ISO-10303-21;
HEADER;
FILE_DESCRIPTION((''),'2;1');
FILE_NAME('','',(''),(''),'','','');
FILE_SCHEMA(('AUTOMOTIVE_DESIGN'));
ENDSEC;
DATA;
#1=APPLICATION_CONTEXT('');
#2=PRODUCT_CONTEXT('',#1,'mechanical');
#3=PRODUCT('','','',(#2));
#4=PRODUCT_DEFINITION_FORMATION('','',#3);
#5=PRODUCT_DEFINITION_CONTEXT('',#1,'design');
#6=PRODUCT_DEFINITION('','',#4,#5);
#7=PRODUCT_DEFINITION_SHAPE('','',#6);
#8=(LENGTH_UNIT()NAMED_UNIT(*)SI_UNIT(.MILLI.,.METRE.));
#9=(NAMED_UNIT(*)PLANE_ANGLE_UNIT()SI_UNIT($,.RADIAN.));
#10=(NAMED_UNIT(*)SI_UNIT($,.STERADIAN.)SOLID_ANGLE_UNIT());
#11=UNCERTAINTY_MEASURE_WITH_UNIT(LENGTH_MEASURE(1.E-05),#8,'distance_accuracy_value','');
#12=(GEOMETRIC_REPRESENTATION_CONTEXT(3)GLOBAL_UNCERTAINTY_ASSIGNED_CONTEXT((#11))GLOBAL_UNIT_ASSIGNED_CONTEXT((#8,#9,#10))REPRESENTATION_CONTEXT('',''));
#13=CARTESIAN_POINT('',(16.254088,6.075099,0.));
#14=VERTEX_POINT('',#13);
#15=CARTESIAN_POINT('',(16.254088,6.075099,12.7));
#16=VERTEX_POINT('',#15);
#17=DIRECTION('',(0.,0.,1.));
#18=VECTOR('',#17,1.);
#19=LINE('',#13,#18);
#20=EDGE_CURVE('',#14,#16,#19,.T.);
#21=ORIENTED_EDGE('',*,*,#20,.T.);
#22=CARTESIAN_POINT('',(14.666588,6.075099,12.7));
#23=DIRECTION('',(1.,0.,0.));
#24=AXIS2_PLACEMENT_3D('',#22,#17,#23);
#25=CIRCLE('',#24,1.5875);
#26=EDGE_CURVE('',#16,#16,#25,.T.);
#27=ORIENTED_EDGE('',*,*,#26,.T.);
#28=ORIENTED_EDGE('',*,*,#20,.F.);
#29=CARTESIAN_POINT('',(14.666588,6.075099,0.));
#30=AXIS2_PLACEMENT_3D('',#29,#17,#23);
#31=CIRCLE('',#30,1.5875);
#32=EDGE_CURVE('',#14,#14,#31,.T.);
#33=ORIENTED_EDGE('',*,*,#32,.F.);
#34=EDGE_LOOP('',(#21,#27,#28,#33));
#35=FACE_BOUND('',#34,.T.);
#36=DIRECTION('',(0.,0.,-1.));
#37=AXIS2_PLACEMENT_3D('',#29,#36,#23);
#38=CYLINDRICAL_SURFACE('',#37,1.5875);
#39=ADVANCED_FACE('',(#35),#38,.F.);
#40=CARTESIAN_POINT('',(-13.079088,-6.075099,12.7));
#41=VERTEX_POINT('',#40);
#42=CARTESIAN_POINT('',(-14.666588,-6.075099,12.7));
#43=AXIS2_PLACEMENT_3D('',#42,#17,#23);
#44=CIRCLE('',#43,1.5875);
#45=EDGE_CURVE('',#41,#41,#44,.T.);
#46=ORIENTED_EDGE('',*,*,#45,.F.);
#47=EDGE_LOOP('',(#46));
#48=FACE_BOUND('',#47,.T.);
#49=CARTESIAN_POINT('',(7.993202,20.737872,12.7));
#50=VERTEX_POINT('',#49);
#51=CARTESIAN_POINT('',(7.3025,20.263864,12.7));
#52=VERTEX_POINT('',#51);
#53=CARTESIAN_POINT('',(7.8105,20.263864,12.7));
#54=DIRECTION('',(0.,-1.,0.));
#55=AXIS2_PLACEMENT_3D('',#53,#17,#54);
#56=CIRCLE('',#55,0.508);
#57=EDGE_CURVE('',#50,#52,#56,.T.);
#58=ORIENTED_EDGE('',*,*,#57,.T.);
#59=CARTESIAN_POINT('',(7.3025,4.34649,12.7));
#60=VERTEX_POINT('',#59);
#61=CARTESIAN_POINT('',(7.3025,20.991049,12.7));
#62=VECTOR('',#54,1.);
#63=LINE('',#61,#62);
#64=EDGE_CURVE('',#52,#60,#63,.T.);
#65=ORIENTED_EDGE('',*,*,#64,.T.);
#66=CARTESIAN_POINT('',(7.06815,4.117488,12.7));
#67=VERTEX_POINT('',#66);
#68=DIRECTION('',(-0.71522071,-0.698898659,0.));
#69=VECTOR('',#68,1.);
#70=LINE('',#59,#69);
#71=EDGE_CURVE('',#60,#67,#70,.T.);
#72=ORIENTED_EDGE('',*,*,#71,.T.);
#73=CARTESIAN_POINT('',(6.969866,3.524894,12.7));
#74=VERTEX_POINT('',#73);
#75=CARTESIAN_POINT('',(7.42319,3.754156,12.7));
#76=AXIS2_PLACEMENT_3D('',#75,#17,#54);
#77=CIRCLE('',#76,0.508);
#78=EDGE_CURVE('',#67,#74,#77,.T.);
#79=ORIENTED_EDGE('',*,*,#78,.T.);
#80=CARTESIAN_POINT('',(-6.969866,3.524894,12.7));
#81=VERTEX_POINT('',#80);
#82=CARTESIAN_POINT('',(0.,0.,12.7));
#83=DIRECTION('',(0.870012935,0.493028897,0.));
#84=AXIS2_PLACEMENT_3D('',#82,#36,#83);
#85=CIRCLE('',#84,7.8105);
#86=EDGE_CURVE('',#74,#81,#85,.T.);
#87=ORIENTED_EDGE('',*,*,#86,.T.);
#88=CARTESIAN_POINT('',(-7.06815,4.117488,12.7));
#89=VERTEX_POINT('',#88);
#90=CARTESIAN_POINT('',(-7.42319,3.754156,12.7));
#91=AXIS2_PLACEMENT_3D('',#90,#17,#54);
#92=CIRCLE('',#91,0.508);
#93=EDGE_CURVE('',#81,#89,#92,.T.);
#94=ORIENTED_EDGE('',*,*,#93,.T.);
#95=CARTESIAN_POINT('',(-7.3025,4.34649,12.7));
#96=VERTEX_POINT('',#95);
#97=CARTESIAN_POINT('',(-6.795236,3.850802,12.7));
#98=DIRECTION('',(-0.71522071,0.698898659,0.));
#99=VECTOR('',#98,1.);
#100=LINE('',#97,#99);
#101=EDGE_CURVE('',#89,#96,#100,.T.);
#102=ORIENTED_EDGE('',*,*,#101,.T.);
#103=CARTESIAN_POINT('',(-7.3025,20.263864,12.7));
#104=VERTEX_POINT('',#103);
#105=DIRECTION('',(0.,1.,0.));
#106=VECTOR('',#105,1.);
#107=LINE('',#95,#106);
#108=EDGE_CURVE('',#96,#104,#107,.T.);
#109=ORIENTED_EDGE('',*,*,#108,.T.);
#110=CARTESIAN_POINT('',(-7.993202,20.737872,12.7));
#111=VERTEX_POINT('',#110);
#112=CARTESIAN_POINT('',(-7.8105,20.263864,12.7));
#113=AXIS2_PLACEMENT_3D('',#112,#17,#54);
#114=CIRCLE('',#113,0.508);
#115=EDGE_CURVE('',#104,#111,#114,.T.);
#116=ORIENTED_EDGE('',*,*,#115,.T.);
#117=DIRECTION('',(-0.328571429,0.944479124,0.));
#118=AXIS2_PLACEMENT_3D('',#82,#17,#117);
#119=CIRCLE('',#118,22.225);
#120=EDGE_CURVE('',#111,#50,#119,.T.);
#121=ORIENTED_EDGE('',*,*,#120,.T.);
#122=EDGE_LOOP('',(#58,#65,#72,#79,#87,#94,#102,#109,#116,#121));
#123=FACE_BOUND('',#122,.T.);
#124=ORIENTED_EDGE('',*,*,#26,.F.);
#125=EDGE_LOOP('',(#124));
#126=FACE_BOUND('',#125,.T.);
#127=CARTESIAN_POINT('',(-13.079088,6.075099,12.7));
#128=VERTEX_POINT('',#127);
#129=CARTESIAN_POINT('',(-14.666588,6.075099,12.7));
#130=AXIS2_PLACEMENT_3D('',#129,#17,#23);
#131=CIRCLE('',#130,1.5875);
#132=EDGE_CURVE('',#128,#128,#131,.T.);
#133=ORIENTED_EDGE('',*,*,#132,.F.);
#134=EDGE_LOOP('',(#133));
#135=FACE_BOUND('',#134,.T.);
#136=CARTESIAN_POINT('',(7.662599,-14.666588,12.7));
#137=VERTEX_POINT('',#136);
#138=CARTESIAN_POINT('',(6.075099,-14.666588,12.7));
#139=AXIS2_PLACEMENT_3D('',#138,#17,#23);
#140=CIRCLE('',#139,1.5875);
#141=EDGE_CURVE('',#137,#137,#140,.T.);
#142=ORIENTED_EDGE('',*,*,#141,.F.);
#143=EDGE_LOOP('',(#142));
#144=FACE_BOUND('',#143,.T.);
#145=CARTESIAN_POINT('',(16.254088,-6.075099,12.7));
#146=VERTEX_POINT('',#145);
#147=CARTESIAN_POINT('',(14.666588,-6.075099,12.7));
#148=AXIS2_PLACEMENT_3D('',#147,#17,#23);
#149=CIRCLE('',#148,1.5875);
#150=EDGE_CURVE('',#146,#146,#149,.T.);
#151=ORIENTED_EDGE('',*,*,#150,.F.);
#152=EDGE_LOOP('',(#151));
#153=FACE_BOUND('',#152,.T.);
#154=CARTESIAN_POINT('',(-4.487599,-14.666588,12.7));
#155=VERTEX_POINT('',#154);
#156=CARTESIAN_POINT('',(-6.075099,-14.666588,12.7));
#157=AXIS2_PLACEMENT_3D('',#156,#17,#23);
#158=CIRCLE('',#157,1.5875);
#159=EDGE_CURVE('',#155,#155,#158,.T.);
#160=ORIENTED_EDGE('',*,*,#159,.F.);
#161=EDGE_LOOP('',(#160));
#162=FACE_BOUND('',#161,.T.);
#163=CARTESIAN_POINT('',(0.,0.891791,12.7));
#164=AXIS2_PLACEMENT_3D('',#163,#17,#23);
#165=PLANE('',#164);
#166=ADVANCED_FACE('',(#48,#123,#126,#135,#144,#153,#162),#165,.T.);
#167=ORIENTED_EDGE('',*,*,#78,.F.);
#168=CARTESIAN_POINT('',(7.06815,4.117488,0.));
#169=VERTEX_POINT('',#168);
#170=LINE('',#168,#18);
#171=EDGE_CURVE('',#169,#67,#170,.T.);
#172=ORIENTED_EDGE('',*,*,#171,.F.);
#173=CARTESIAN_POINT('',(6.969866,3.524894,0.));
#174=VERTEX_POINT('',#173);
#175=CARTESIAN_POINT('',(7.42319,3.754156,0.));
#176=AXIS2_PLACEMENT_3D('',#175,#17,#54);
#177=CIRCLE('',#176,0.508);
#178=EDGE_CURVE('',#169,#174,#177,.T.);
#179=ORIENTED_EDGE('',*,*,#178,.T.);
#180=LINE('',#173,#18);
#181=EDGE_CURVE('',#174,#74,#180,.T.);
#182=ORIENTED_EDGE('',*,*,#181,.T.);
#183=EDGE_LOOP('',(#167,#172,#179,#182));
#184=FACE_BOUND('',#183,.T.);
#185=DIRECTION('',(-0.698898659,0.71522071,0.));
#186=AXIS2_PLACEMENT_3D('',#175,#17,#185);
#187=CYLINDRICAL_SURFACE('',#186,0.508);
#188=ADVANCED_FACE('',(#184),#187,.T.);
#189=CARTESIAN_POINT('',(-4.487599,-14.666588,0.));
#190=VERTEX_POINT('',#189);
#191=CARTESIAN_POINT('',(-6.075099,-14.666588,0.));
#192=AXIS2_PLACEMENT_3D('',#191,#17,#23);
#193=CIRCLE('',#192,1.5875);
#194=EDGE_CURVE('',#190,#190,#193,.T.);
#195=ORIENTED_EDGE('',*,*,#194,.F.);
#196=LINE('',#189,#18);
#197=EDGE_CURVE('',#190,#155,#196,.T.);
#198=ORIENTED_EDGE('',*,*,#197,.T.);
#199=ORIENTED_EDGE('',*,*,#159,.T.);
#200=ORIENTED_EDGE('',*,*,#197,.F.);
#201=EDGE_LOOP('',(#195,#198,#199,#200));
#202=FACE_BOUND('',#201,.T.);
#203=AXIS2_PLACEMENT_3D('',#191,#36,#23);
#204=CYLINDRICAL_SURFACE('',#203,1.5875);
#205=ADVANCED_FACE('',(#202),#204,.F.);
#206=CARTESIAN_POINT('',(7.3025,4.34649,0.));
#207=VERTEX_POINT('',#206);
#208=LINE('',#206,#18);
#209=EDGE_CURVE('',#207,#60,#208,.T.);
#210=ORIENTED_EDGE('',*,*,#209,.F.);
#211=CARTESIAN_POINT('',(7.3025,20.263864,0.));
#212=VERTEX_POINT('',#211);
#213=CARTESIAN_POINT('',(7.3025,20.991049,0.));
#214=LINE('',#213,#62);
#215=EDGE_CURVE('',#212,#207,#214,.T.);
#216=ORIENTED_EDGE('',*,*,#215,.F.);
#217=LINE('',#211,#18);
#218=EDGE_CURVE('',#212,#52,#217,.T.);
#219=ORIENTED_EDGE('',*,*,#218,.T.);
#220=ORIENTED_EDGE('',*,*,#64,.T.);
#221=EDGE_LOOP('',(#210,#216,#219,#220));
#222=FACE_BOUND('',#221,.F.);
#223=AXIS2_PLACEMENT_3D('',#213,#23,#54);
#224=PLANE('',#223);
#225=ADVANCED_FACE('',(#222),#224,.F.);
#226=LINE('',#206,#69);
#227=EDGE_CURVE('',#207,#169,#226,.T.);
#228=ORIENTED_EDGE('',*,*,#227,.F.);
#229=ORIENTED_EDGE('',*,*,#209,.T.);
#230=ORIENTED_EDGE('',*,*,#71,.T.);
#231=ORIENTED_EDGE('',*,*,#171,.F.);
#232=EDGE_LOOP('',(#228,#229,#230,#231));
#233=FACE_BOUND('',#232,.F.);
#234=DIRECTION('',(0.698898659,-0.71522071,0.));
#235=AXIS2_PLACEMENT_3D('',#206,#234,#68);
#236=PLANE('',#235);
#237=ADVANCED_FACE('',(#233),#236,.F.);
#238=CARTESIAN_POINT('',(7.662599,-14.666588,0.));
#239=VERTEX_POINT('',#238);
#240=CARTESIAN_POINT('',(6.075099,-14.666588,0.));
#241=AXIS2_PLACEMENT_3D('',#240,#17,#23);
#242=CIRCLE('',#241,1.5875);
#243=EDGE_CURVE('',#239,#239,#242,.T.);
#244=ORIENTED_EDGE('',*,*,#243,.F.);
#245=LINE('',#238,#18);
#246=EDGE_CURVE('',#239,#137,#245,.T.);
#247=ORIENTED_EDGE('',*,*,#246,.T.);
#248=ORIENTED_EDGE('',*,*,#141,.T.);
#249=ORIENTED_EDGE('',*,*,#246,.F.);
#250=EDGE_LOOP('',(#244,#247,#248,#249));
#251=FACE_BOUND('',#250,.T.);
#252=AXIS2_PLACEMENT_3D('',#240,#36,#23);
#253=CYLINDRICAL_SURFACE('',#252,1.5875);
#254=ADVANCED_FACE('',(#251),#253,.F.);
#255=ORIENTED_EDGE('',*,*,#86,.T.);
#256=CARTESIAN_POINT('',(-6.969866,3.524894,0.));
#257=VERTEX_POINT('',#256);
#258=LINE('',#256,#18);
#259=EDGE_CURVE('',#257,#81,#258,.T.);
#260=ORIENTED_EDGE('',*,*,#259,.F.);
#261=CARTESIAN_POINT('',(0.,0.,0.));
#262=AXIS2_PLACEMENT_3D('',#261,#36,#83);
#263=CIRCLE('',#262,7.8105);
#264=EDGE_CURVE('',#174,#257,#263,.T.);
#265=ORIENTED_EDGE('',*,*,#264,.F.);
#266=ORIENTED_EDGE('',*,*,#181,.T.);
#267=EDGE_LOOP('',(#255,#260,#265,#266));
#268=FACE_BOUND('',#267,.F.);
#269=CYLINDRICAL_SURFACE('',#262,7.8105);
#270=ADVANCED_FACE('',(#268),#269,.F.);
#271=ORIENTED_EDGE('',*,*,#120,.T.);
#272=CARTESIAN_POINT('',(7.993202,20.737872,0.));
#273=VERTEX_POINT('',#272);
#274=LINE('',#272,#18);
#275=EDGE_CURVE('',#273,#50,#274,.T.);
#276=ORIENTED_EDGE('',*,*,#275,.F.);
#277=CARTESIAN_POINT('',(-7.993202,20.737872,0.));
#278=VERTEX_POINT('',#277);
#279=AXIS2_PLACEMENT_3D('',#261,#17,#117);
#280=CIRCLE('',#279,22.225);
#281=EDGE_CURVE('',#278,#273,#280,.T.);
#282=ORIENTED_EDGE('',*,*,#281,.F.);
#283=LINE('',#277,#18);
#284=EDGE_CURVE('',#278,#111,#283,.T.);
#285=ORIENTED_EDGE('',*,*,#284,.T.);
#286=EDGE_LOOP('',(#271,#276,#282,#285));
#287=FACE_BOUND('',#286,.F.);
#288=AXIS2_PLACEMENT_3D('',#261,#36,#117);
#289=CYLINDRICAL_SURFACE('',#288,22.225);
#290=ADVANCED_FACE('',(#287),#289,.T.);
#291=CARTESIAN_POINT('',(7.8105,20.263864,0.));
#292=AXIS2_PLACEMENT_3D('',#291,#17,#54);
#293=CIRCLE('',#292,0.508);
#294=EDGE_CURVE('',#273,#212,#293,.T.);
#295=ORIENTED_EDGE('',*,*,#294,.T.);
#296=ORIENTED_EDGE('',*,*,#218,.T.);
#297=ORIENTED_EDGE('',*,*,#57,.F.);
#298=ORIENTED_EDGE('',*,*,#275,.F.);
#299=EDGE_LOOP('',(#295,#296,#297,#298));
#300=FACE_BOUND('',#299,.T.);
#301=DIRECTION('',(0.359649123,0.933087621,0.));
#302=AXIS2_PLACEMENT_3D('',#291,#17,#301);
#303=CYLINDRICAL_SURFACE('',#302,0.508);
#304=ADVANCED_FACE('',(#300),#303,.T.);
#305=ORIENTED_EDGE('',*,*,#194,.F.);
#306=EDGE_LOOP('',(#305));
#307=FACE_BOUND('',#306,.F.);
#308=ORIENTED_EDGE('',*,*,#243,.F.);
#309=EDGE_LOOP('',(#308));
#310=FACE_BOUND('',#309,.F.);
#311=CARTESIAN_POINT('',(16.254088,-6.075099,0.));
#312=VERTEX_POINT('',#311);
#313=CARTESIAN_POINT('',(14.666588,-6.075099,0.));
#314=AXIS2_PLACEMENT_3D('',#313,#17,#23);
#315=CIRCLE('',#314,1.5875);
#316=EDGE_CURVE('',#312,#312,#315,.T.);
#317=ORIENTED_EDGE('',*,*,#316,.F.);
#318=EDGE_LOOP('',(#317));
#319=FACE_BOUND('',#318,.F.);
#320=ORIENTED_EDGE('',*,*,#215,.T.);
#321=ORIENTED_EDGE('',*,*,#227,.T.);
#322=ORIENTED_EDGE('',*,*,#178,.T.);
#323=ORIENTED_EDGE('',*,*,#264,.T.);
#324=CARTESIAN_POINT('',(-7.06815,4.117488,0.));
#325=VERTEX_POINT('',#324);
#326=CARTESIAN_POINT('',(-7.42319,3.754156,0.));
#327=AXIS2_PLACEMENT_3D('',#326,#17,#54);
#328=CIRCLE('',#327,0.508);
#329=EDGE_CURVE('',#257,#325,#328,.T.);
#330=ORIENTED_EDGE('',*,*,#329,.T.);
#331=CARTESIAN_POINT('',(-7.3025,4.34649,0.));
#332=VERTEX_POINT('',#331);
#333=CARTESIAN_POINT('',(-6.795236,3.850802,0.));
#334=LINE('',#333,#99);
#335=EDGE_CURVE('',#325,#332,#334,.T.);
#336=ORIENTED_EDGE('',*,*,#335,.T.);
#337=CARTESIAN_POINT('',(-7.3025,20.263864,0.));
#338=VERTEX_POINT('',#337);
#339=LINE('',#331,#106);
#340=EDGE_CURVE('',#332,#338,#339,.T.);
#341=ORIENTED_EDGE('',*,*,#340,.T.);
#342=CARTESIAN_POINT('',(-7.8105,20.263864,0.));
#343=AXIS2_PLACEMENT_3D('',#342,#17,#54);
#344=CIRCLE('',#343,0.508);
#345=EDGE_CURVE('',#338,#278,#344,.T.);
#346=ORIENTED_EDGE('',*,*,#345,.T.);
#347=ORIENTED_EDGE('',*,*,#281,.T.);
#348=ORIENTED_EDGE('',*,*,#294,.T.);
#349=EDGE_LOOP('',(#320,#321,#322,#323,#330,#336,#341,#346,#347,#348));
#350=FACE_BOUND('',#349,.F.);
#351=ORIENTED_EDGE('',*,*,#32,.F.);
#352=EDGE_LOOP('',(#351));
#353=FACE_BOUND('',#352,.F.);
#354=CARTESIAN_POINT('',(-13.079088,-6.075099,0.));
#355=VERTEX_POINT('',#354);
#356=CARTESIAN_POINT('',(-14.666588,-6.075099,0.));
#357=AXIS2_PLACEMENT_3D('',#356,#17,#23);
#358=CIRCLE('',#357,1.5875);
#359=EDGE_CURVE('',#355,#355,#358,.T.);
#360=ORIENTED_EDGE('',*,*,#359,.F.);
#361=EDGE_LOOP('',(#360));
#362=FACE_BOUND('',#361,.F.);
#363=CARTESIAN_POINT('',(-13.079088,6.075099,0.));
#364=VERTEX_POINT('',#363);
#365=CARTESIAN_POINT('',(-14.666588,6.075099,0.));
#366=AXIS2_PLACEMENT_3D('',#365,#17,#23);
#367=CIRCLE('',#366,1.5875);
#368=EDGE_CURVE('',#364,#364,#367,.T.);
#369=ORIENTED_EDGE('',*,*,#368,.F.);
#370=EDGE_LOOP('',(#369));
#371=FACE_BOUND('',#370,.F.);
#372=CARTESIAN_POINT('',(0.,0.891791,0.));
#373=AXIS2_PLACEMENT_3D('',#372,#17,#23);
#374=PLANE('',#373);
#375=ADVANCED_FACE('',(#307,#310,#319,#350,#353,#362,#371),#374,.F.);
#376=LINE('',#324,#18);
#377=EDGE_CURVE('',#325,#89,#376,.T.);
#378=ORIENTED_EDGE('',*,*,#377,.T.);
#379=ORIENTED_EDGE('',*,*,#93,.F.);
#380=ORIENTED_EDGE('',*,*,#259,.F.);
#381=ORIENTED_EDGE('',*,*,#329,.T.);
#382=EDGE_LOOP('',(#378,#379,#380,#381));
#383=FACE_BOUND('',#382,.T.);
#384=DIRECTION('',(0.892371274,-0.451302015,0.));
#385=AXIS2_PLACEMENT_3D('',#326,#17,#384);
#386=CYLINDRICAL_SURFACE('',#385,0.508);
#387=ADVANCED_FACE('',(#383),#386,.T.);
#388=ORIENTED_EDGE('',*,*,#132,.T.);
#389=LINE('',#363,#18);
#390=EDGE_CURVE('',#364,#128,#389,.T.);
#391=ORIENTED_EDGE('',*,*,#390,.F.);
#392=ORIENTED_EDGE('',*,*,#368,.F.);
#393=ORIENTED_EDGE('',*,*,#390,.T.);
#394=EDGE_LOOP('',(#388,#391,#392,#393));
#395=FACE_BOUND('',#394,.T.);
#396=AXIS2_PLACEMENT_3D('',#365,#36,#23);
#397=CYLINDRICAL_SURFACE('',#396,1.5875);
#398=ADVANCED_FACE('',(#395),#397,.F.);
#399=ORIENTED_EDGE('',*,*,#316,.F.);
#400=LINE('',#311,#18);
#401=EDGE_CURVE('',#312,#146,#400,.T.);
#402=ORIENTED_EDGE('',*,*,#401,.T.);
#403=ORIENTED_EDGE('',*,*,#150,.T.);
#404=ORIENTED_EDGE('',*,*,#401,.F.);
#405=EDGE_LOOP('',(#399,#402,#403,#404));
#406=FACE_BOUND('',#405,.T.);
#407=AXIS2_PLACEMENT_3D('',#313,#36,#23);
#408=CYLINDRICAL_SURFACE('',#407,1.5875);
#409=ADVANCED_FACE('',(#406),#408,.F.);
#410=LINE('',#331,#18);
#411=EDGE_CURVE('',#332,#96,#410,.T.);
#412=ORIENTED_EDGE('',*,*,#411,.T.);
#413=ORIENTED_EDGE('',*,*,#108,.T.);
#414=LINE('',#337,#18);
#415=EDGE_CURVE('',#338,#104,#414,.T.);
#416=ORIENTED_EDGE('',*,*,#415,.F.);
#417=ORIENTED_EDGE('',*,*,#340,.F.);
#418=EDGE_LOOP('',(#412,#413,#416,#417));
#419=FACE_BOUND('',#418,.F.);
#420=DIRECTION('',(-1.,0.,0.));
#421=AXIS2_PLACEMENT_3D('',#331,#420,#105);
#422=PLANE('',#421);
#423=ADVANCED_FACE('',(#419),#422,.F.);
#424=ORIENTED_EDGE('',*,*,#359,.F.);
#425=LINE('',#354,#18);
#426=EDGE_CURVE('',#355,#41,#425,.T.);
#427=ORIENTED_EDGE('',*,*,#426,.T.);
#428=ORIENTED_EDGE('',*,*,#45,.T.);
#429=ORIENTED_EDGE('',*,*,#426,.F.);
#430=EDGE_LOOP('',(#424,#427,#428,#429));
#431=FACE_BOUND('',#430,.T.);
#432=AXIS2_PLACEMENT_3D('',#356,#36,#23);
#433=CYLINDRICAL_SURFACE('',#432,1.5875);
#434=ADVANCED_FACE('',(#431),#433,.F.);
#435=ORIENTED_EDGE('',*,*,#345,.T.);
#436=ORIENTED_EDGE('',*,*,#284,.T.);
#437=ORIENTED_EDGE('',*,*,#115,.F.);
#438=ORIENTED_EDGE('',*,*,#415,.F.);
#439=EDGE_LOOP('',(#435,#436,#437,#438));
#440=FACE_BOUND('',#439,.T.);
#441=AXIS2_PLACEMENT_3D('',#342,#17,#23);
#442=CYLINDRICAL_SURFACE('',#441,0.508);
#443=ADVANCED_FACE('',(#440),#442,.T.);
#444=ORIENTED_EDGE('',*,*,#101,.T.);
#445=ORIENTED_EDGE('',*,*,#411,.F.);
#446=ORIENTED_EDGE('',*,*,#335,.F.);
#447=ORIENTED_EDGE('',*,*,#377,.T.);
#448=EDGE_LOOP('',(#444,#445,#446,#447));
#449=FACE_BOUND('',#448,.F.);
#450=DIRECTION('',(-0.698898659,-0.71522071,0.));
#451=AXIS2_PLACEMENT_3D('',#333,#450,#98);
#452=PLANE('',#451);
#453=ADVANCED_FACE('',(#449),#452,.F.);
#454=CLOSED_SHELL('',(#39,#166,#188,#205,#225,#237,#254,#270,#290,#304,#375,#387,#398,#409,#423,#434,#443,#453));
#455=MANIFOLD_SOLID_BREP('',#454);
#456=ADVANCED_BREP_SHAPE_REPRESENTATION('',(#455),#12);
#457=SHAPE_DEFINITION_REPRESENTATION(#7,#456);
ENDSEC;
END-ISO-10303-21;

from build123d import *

# Parameters (mm, degrees)
F3_DEPTH = 12.7
F4_R     = 0.508
F2_R     = 1.5875
F5_DEPTH = 12.7


# Not quite as in the source:
# - a variable given as a bare number and used for a length is read in inches; the dataset says mm whatever the document's units were


with BuildPart() as f3:
    # F1 (on Top) → F3 (new body)
    with BuildSketch(Plane.XY):
        with BuildLine():
            Line((-7.3025, 4.3464899063), (-7.3025, 20.9910485386))
            ThreePointArc((-7.3025, 20.9910485386), (0, -22.225), (7.3025, 20.9910485386))
            Line((7.3025, 20.9910485386), (7.3025, 4.3464899063))
            Line((7.3025, 4.3464899063), (6.7952360256, 3.8508022029))
            ThreePointArc((6.7952360256, 3.8508022029), (0, -7.8105), (-6.7952360256, 3.8508022029))
            Line((-6.7952360256, 3.8508022029), (-7.3025, 4.3464899063))
        make_face()
    extrude(amount=F3_DEPTH)

    # F4
    f4_edges = [f3.edges().sort_by_distance(p)[0] for p in [
        (-6.795236, 3.850802, 6.35),
        (6.795236, 3.850802, 6.35),
        (-7.3025, 20.991049, 6.35),
        (7.3025, 20.991049, 6.35),
    ]]
    fillet(f4_edges, radius=F4_R)

    # F2 (on Top) → F5 (cut, through all)
    with BuildSketch(Plane.XY):
        with Locations((-14.6665875786, 6.0750994888)):
            Circle(F2_R)
        with Locations((-14.6665875786, -6.0750994888)):
            Circle(F2_R)
        with Locations((-6.0750994888, -14.6665875786)):
            Circle(F2_R)
        with Locations((6.0750994888, -14.6665875786)):
            Circle(F2_R)
        with Locations((14.6665875786, -6.0750994888)):
            Circle(F2_R)
        with Locations((14.6665875786, 6.0750994888)):
            Circle(F2_R)
    extrude(amount=F5_DEPTH, mode=Mode.SUBTRACT)


solid = f3.part
